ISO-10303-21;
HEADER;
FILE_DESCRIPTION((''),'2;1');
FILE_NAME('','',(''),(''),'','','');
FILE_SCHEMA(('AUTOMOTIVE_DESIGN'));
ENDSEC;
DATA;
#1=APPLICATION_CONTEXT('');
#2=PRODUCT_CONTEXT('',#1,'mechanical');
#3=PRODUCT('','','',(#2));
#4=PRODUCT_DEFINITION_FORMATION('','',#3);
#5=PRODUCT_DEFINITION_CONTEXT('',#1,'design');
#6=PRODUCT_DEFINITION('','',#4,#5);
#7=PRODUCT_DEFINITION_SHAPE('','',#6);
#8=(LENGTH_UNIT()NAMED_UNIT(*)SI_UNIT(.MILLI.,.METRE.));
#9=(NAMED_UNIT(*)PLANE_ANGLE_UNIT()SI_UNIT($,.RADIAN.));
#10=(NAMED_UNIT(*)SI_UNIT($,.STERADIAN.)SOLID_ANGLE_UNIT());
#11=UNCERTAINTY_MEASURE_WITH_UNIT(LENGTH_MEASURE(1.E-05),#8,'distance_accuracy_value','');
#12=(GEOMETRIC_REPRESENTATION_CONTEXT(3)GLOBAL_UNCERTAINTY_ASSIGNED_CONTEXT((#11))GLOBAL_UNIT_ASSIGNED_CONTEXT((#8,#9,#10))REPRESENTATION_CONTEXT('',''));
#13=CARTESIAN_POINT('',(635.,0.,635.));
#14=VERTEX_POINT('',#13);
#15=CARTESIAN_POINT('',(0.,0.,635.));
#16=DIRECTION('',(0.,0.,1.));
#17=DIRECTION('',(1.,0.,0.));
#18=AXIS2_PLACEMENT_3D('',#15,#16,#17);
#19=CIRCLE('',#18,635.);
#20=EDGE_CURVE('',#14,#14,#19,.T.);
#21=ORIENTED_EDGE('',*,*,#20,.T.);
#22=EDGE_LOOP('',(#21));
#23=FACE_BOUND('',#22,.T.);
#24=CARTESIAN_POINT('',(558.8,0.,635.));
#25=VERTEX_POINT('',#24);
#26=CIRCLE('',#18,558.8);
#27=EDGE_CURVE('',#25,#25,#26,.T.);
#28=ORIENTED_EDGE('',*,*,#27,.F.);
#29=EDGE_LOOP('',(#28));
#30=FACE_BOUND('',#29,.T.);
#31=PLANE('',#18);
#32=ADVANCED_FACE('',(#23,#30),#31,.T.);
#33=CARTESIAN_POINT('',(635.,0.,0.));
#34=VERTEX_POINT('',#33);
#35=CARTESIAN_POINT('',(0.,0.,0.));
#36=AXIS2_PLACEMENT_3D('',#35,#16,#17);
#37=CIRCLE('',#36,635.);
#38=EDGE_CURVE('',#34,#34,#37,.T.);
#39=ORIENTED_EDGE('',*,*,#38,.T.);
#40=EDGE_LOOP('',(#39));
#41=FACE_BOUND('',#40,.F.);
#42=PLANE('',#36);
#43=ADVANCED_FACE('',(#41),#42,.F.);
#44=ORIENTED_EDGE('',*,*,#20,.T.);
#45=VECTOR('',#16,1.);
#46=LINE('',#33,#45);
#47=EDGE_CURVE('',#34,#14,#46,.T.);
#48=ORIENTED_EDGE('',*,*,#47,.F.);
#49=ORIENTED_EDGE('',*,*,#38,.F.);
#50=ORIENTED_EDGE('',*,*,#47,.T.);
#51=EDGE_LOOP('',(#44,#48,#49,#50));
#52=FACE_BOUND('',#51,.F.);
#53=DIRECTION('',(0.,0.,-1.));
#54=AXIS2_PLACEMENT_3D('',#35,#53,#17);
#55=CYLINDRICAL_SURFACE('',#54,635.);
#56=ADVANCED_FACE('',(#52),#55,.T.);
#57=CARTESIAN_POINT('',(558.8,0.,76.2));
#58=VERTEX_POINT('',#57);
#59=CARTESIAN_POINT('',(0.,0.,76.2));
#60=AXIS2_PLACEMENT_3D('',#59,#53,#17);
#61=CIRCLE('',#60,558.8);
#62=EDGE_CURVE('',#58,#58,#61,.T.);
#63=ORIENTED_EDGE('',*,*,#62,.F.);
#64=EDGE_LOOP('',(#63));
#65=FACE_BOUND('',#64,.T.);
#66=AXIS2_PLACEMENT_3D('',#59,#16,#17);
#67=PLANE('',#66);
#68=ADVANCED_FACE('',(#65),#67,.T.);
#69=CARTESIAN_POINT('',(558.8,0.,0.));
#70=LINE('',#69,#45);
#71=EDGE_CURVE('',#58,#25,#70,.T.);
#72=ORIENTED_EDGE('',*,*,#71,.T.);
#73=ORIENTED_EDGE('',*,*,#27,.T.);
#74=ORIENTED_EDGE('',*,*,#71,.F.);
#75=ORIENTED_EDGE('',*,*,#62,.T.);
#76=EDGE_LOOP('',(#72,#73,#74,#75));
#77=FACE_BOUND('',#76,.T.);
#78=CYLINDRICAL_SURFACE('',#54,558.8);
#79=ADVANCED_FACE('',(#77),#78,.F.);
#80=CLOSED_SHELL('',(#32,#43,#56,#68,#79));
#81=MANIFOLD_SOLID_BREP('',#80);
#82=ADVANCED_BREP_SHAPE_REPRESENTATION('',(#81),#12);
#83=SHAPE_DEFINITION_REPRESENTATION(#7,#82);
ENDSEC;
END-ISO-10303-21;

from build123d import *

# Parameters (mm, degrees)
F2_R     = 635
F3_DEPTH = 635
F4_T     = -76.2


# Not quite as in the source:
# - a variable given as a bare number and used for a length is read in inches; the dataset says mm whatever the document's units were


with BuildPart() as f3:
    # F2 (on Top) → F3 (new body)
    with BuildSketch(Plane.XY):
        Circle(F2_R)
    extrude(amount=F3_DEPTH)

    # F4
    f4_openings = [f3.faces().sort_by_distance(p)[0] for p in [
        (0, 0, 635),
    ]]
    offset(amount=F4_T, openings=f4_openings)


solid = f3.part
